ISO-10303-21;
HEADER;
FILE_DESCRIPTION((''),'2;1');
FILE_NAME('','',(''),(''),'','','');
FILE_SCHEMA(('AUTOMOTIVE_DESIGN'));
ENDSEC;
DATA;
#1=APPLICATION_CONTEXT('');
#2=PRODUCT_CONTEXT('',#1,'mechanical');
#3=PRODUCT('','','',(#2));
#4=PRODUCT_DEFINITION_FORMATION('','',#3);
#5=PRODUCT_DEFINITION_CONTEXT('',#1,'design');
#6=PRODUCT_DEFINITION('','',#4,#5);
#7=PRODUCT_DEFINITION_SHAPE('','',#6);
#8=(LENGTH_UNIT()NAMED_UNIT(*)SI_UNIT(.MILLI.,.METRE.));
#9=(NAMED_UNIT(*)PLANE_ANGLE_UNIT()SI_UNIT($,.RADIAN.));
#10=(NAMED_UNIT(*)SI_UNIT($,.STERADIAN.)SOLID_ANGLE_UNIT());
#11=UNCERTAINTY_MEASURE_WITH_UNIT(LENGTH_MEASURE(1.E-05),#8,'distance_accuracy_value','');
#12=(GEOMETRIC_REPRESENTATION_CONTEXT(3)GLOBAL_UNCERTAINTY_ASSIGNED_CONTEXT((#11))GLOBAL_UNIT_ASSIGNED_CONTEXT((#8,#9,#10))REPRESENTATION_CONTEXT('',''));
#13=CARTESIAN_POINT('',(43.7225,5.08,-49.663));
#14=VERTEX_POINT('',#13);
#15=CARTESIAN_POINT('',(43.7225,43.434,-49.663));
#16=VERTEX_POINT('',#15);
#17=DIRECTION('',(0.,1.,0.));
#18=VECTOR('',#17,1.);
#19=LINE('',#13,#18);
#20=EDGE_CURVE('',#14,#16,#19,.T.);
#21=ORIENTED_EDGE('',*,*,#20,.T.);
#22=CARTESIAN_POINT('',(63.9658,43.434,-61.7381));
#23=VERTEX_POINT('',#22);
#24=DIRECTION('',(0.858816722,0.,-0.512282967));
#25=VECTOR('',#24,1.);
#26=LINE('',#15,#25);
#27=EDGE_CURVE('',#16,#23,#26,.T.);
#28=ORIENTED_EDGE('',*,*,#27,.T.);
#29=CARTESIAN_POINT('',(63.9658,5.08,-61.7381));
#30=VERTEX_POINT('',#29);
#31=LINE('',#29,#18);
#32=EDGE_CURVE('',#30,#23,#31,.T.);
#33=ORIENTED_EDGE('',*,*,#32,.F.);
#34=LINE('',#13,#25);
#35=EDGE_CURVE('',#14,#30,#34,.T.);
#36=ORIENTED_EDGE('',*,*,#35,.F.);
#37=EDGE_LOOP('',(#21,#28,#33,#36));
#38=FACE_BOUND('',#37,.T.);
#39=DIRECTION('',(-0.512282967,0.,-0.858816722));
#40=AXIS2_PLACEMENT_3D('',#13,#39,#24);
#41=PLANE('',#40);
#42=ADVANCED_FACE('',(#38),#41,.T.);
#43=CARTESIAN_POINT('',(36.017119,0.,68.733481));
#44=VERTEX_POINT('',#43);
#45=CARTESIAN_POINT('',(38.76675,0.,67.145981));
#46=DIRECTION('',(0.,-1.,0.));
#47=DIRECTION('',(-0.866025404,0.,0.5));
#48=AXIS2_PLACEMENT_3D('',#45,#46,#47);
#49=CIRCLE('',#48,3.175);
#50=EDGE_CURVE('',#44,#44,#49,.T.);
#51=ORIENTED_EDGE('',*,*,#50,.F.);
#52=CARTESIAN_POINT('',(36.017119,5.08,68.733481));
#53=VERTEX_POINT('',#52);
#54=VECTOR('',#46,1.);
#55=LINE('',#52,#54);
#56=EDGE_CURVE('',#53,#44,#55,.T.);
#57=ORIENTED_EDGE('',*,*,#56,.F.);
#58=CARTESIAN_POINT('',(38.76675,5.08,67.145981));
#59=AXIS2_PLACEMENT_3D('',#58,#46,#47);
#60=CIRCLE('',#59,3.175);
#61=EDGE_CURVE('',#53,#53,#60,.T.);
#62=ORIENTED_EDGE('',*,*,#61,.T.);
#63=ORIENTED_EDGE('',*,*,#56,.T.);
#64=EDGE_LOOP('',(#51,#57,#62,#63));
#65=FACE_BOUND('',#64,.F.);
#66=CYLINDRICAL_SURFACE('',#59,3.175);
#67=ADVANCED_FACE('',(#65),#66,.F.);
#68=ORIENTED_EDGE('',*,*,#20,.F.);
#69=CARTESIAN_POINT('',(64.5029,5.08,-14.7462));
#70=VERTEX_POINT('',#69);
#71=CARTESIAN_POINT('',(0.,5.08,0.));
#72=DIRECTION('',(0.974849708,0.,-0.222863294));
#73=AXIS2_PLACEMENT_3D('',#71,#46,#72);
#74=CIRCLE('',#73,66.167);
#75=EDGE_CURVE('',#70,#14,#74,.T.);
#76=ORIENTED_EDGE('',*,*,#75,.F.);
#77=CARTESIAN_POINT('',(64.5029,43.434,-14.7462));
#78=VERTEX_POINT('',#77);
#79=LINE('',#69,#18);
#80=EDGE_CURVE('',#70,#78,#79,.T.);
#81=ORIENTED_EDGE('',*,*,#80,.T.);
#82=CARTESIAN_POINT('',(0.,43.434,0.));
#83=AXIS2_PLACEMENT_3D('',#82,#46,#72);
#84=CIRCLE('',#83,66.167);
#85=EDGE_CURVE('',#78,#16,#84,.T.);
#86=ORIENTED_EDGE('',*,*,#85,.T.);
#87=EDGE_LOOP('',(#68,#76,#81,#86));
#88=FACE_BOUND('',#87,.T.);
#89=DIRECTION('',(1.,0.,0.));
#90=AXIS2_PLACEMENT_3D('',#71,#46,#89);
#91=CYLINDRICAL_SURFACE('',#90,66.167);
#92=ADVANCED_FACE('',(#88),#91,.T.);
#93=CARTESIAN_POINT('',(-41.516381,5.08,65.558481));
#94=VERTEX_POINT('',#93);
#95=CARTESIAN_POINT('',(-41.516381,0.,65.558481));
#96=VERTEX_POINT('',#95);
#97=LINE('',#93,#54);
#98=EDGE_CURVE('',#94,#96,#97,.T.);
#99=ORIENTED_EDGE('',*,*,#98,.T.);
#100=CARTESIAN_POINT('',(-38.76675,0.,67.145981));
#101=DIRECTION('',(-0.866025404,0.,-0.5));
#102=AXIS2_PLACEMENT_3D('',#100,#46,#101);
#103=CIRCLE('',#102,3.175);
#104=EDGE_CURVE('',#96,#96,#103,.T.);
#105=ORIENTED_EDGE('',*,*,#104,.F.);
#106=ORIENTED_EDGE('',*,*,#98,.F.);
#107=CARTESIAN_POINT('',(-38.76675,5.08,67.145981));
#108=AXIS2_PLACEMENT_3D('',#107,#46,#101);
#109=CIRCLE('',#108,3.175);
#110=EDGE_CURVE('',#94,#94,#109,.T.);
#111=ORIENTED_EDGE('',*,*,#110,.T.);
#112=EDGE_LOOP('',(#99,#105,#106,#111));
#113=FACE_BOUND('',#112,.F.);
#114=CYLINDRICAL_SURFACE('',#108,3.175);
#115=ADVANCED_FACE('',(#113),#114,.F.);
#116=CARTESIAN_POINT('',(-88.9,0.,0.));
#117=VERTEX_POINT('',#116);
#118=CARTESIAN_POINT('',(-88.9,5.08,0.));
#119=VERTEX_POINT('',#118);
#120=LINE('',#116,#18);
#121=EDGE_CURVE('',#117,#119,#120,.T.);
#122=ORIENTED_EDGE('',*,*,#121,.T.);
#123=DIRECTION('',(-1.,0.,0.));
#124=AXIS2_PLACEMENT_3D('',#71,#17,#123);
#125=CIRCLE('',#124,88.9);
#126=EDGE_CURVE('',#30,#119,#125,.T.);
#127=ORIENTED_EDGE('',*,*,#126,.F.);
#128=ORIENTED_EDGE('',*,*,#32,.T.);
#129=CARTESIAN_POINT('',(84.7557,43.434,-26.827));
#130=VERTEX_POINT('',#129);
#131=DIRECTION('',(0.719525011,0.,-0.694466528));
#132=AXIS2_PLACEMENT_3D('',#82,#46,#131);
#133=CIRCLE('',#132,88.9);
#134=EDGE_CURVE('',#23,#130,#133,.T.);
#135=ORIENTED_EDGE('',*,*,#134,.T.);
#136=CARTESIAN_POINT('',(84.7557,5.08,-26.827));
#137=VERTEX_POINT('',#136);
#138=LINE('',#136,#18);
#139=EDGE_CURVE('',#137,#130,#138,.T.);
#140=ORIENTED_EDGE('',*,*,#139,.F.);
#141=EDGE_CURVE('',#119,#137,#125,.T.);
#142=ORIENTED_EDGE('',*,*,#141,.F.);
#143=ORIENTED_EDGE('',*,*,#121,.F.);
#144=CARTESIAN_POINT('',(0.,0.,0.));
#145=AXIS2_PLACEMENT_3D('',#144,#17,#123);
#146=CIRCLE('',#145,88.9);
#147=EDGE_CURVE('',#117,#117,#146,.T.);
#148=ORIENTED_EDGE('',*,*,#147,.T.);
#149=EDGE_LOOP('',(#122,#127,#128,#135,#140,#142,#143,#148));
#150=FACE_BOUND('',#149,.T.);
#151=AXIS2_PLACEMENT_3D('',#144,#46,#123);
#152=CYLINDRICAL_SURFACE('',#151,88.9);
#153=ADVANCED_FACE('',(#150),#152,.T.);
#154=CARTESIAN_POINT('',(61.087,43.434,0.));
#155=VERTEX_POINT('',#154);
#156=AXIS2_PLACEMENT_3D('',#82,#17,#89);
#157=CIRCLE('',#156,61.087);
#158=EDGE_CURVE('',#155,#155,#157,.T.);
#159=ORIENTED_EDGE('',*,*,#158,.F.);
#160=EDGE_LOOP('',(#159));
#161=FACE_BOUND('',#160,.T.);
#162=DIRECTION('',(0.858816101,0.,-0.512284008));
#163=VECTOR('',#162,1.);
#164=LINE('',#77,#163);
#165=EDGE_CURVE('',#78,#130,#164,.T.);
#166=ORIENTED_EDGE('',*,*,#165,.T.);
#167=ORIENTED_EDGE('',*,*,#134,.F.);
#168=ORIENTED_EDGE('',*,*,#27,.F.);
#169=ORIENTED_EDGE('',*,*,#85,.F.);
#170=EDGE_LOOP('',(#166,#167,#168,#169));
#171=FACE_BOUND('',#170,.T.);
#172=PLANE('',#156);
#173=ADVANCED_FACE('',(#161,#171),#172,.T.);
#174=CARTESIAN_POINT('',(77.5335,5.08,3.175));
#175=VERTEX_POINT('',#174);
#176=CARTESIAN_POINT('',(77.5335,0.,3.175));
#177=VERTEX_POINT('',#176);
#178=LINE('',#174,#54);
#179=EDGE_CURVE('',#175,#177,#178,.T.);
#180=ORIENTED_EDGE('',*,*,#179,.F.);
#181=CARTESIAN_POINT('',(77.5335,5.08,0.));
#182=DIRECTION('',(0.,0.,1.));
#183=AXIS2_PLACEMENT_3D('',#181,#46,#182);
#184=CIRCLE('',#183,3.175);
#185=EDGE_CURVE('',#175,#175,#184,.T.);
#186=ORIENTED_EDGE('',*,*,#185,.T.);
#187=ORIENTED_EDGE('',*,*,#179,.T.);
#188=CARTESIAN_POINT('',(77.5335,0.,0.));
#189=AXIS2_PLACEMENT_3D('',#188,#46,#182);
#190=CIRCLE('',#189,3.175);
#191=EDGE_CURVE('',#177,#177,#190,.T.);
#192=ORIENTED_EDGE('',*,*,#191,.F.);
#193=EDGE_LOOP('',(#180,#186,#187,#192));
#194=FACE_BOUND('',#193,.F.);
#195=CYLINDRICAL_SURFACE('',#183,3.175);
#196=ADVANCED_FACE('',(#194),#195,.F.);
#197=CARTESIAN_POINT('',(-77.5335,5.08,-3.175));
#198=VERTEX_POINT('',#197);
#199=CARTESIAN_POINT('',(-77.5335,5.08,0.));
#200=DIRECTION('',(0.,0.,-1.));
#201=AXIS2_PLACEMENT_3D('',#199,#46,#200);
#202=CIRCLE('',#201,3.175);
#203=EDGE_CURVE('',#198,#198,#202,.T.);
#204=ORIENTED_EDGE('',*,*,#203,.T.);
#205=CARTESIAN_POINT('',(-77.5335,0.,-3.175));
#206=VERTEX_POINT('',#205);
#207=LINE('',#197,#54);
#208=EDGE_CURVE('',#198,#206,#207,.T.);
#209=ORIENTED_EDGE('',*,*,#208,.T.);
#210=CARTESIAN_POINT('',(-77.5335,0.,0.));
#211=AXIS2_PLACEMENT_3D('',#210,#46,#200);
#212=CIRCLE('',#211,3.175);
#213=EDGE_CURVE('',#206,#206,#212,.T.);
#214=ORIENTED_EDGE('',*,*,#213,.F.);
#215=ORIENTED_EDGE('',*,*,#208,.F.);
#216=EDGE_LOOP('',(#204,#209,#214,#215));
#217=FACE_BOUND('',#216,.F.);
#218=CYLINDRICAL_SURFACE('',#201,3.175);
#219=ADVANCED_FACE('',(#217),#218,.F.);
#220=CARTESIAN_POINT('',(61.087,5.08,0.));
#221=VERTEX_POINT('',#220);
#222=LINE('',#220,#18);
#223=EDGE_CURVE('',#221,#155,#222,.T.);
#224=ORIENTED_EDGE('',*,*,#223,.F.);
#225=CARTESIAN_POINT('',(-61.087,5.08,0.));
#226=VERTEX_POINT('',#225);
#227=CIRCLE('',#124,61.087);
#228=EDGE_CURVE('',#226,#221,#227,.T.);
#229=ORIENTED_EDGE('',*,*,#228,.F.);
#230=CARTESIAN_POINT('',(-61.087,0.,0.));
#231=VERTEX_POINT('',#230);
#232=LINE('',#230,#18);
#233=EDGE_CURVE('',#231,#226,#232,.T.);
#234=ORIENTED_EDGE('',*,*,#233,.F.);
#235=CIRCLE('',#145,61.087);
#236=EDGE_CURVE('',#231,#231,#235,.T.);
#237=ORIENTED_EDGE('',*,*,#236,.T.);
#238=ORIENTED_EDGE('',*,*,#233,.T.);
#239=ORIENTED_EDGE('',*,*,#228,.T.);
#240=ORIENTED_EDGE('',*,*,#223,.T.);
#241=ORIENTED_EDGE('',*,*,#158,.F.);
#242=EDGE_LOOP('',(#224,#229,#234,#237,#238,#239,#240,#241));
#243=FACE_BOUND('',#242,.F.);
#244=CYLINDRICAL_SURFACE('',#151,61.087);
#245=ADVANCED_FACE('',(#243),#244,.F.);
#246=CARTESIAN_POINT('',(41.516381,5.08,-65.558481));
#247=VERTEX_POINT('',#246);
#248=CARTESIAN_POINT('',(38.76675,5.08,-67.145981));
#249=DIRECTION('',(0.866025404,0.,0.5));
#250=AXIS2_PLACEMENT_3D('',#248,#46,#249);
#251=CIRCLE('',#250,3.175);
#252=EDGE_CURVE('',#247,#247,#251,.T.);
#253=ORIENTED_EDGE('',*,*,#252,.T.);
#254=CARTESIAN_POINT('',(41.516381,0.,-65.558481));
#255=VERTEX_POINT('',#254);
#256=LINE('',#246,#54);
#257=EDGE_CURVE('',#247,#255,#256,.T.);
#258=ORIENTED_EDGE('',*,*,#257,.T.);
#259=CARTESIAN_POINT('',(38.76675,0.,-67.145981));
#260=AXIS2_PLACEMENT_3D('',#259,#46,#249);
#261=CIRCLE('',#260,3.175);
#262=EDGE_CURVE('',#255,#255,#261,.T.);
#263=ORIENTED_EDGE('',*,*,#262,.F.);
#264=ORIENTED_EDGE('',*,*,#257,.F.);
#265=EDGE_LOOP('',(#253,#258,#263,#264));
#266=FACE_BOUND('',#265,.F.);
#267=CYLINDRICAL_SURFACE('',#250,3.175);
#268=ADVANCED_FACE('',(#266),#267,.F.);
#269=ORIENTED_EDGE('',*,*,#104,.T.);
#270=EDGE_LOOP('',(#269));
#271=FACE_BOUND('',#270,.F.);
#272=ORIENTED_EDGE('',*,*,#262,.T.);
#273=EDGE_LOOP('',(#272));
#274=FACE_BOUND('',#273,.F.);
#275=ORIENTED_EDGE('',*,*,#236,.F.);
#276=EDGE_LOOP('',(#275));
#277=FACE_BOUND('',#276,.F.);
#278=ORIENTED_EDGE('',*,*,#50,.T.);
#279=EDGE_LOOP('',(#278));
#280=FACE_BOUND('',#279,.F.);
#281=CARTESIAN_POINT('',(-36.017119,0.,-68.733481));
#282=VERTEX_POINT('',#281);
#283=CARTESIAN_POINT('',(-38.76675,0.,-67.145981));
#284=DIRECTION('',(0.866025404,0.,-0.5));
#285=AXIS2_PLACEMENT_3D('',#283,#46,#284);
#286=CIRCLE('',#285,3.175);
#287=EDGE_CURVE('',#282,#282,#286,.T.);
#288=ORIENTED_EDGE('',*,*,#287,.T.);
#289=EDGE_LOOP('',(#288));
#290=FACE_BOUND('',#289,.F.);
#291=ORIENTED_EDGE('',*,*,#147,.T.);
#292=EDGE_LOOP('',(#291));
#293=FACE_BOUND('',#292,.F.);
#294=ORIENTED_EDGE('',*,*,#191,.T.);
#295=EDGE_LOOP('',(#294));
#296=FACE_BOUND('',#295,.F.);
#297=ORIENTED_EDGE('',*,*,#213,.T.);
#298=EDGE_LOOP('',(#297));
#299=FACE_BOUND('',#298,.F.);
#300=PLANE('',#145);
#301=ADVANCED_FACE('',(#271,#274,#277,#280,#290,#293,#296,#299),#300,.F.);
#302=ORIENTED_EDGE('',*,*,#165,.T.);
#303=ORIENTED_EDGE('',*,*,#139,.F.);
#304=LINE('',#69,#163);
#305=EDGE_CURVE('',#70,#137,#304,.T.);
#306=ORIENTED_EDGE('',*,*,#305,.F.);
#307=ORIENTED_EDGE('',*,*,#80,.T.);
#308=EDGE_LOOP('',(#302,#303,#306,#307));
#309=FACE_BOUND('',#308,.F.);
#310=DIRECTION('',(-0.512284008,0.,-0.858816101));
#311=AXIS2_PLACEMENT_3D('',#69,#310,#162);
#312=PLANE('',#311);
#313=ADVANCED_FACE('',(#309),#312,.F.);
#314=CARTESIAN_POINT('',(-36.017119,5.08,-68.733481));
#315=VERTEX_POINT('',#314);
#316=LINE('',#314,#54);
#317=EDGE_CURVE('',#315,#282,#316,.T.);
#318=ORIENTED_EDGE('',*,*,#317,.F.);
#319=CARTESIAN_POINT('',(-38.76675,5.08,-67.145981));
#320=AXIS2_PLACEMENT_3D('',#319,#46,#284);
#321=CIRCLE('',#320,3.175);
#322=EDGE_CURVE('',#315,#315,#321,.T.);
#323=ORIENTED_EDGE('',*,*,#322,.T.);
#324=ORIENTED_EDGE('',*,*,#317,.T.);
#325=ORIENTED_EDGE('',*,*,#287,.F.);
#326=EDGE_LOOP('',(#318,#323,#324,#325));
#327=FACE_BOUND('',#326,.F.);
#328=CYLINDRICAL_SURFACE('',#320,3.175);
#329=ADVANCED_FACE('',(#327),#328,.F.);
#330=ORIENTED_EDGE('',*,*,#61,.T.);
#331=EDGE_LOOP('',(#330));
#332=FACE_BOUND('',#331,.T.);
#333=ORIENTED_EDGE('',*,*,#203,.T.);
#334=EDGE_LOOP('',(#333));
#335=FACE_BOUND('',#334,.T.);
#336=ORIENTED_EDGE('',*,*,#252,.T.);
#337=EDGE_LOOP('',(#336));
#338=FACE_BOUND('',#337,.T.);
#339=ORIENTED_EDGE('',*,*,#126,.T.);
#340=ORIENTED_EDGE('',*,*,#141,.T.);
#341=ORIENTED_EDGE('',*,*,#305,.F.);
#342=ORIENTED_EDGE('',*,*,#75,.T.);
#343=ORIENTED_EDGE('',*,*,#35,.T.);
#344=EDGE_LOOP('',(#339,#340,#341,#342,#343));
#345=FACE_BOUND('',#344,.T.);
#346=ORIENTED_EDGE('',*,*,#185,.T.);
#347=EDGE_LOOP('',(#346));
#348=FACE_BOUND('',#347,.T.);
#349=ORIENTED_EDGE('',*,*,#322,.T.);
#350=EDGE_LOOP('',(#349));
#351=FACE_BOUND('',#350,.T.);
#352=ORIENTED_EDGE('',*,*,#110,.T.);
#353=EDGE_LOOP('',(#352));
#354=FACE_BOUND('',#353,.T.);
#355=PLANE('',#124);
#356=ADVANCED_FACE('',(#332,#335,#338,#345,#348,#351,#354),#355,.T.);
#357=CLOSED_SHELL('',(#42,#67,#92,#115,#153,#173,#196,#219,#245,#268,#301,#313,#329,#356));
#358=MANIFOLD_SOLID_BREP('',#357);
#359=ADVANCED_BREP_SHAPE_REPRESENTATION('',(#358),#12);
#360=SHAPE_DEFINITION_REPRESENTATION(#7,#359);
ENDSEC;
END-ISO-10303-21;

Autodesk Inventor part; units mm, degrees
ref_plane "YZ Plane" through (0, 0, 0) normal (1, 0, 0) x (0, 1, 0)
ref_plane "XZ Plane" through (0, 0, 0) normal (0, 1, 0) x (-1, 0, 0)
ref_plane "XY Plane" through (0, 0, 0) normal (0, 0, 1) x (1, 0, 0)
sketch "Sketch1" plane through (0, 0, 0) normal (0, 1, 0) x (-1, 0, 0)
  circle A0 centre (0, 0) radius 61.087
  circle A1 centre (0, 0) radius 88.9
  dimension "d0" = 122.174
  dimension "d1" = 177.8
extrude "Extrusion1" add sketch "Sketch1" along normal blind 5.08
sketch "Sketch2" plane through (0, 5.08, 0) normal (0, 1, 0) x (1, 0, 0)
  circle A0 centre (0, 0) radius 61.087 projected
  circle A1 centre (0, 0) radius 66.167
  dimension "d4" = 132.334
  dimension "d5" = 122.174
extrude "Extrusion2" add sketch "Sketch2" along normal blind 38.354
sketch "Sketch3" plane through (0, 5.08, 0) normal (0, 1, 0) x (1, 0, 0)
  circle A0 centre (0, 0) radius 66.167 projected
  circle A1 centre (0, 0) radius 88.9 projected
  line L0 (66.167, 0) -> (88.9, 0) construction
  line L1 (66.167, 0) -> (77.5335, 0)
  circle A2 centre (77.5335, 0) radius 3.175
  point P0 (80.7085, 0)
  dimension "d10" = 6.35
  dimension "d8" = 22.733
  dimension "d9" = 11.3665
  dimension "d11" = 8.1915
hole "Hole1" at (77.5335, 5.08, 0) direction (0, -1, 0) diameter 6.35 end through all
pattern_circular "Circular Pattern1" count 6 over 360 about axis through (0, -10, 0) along (0, 1, 0) of "Hole1"
sketch "Sketch4" plane through (0, 5.08, 0) normal (0, 1, 0) x (1, 0, 0)
  circle A0 centre (0, 0) radius 66.167 projected
  line L0 (43.7225, 49.663) -> (63.9658, 61.7381)
  circle A1 centre (0, 0) radius 88.9 projected
  line L1 (64.5029, 14.7462) -> (84.7557, 26.827)
  arc A2 (64.5029, 14.7462) -> (41.6667, 51.4) centre (0, 0) ccw
  arc A3 (81.2449, 36.0899) -> (63.9658, 61.7381) centre (0, 0) ccw
  circle A4 centre (77.5335, 0) radius 3.175 projected
  circle A5 centre (38.7668, 67.146) radius 3.175 projected
extrude "Extrusion3" add sketch "Sketch4" along normal blind 38.354 contours A0 L0 A1 L1 picked at (52.8659, 51.2219)
sketch "Sketch5" plane through (72.0744, 43.434, -52.0431) normal (0.8107358, 0, -0.5854122) x (0, 1, 0)
  circle A0 centre (-18.8086, 0) radius 3.175
  point P0 (-43.434, 0)
  dimension "d24" = 6.35
properties part number "flangev3"
